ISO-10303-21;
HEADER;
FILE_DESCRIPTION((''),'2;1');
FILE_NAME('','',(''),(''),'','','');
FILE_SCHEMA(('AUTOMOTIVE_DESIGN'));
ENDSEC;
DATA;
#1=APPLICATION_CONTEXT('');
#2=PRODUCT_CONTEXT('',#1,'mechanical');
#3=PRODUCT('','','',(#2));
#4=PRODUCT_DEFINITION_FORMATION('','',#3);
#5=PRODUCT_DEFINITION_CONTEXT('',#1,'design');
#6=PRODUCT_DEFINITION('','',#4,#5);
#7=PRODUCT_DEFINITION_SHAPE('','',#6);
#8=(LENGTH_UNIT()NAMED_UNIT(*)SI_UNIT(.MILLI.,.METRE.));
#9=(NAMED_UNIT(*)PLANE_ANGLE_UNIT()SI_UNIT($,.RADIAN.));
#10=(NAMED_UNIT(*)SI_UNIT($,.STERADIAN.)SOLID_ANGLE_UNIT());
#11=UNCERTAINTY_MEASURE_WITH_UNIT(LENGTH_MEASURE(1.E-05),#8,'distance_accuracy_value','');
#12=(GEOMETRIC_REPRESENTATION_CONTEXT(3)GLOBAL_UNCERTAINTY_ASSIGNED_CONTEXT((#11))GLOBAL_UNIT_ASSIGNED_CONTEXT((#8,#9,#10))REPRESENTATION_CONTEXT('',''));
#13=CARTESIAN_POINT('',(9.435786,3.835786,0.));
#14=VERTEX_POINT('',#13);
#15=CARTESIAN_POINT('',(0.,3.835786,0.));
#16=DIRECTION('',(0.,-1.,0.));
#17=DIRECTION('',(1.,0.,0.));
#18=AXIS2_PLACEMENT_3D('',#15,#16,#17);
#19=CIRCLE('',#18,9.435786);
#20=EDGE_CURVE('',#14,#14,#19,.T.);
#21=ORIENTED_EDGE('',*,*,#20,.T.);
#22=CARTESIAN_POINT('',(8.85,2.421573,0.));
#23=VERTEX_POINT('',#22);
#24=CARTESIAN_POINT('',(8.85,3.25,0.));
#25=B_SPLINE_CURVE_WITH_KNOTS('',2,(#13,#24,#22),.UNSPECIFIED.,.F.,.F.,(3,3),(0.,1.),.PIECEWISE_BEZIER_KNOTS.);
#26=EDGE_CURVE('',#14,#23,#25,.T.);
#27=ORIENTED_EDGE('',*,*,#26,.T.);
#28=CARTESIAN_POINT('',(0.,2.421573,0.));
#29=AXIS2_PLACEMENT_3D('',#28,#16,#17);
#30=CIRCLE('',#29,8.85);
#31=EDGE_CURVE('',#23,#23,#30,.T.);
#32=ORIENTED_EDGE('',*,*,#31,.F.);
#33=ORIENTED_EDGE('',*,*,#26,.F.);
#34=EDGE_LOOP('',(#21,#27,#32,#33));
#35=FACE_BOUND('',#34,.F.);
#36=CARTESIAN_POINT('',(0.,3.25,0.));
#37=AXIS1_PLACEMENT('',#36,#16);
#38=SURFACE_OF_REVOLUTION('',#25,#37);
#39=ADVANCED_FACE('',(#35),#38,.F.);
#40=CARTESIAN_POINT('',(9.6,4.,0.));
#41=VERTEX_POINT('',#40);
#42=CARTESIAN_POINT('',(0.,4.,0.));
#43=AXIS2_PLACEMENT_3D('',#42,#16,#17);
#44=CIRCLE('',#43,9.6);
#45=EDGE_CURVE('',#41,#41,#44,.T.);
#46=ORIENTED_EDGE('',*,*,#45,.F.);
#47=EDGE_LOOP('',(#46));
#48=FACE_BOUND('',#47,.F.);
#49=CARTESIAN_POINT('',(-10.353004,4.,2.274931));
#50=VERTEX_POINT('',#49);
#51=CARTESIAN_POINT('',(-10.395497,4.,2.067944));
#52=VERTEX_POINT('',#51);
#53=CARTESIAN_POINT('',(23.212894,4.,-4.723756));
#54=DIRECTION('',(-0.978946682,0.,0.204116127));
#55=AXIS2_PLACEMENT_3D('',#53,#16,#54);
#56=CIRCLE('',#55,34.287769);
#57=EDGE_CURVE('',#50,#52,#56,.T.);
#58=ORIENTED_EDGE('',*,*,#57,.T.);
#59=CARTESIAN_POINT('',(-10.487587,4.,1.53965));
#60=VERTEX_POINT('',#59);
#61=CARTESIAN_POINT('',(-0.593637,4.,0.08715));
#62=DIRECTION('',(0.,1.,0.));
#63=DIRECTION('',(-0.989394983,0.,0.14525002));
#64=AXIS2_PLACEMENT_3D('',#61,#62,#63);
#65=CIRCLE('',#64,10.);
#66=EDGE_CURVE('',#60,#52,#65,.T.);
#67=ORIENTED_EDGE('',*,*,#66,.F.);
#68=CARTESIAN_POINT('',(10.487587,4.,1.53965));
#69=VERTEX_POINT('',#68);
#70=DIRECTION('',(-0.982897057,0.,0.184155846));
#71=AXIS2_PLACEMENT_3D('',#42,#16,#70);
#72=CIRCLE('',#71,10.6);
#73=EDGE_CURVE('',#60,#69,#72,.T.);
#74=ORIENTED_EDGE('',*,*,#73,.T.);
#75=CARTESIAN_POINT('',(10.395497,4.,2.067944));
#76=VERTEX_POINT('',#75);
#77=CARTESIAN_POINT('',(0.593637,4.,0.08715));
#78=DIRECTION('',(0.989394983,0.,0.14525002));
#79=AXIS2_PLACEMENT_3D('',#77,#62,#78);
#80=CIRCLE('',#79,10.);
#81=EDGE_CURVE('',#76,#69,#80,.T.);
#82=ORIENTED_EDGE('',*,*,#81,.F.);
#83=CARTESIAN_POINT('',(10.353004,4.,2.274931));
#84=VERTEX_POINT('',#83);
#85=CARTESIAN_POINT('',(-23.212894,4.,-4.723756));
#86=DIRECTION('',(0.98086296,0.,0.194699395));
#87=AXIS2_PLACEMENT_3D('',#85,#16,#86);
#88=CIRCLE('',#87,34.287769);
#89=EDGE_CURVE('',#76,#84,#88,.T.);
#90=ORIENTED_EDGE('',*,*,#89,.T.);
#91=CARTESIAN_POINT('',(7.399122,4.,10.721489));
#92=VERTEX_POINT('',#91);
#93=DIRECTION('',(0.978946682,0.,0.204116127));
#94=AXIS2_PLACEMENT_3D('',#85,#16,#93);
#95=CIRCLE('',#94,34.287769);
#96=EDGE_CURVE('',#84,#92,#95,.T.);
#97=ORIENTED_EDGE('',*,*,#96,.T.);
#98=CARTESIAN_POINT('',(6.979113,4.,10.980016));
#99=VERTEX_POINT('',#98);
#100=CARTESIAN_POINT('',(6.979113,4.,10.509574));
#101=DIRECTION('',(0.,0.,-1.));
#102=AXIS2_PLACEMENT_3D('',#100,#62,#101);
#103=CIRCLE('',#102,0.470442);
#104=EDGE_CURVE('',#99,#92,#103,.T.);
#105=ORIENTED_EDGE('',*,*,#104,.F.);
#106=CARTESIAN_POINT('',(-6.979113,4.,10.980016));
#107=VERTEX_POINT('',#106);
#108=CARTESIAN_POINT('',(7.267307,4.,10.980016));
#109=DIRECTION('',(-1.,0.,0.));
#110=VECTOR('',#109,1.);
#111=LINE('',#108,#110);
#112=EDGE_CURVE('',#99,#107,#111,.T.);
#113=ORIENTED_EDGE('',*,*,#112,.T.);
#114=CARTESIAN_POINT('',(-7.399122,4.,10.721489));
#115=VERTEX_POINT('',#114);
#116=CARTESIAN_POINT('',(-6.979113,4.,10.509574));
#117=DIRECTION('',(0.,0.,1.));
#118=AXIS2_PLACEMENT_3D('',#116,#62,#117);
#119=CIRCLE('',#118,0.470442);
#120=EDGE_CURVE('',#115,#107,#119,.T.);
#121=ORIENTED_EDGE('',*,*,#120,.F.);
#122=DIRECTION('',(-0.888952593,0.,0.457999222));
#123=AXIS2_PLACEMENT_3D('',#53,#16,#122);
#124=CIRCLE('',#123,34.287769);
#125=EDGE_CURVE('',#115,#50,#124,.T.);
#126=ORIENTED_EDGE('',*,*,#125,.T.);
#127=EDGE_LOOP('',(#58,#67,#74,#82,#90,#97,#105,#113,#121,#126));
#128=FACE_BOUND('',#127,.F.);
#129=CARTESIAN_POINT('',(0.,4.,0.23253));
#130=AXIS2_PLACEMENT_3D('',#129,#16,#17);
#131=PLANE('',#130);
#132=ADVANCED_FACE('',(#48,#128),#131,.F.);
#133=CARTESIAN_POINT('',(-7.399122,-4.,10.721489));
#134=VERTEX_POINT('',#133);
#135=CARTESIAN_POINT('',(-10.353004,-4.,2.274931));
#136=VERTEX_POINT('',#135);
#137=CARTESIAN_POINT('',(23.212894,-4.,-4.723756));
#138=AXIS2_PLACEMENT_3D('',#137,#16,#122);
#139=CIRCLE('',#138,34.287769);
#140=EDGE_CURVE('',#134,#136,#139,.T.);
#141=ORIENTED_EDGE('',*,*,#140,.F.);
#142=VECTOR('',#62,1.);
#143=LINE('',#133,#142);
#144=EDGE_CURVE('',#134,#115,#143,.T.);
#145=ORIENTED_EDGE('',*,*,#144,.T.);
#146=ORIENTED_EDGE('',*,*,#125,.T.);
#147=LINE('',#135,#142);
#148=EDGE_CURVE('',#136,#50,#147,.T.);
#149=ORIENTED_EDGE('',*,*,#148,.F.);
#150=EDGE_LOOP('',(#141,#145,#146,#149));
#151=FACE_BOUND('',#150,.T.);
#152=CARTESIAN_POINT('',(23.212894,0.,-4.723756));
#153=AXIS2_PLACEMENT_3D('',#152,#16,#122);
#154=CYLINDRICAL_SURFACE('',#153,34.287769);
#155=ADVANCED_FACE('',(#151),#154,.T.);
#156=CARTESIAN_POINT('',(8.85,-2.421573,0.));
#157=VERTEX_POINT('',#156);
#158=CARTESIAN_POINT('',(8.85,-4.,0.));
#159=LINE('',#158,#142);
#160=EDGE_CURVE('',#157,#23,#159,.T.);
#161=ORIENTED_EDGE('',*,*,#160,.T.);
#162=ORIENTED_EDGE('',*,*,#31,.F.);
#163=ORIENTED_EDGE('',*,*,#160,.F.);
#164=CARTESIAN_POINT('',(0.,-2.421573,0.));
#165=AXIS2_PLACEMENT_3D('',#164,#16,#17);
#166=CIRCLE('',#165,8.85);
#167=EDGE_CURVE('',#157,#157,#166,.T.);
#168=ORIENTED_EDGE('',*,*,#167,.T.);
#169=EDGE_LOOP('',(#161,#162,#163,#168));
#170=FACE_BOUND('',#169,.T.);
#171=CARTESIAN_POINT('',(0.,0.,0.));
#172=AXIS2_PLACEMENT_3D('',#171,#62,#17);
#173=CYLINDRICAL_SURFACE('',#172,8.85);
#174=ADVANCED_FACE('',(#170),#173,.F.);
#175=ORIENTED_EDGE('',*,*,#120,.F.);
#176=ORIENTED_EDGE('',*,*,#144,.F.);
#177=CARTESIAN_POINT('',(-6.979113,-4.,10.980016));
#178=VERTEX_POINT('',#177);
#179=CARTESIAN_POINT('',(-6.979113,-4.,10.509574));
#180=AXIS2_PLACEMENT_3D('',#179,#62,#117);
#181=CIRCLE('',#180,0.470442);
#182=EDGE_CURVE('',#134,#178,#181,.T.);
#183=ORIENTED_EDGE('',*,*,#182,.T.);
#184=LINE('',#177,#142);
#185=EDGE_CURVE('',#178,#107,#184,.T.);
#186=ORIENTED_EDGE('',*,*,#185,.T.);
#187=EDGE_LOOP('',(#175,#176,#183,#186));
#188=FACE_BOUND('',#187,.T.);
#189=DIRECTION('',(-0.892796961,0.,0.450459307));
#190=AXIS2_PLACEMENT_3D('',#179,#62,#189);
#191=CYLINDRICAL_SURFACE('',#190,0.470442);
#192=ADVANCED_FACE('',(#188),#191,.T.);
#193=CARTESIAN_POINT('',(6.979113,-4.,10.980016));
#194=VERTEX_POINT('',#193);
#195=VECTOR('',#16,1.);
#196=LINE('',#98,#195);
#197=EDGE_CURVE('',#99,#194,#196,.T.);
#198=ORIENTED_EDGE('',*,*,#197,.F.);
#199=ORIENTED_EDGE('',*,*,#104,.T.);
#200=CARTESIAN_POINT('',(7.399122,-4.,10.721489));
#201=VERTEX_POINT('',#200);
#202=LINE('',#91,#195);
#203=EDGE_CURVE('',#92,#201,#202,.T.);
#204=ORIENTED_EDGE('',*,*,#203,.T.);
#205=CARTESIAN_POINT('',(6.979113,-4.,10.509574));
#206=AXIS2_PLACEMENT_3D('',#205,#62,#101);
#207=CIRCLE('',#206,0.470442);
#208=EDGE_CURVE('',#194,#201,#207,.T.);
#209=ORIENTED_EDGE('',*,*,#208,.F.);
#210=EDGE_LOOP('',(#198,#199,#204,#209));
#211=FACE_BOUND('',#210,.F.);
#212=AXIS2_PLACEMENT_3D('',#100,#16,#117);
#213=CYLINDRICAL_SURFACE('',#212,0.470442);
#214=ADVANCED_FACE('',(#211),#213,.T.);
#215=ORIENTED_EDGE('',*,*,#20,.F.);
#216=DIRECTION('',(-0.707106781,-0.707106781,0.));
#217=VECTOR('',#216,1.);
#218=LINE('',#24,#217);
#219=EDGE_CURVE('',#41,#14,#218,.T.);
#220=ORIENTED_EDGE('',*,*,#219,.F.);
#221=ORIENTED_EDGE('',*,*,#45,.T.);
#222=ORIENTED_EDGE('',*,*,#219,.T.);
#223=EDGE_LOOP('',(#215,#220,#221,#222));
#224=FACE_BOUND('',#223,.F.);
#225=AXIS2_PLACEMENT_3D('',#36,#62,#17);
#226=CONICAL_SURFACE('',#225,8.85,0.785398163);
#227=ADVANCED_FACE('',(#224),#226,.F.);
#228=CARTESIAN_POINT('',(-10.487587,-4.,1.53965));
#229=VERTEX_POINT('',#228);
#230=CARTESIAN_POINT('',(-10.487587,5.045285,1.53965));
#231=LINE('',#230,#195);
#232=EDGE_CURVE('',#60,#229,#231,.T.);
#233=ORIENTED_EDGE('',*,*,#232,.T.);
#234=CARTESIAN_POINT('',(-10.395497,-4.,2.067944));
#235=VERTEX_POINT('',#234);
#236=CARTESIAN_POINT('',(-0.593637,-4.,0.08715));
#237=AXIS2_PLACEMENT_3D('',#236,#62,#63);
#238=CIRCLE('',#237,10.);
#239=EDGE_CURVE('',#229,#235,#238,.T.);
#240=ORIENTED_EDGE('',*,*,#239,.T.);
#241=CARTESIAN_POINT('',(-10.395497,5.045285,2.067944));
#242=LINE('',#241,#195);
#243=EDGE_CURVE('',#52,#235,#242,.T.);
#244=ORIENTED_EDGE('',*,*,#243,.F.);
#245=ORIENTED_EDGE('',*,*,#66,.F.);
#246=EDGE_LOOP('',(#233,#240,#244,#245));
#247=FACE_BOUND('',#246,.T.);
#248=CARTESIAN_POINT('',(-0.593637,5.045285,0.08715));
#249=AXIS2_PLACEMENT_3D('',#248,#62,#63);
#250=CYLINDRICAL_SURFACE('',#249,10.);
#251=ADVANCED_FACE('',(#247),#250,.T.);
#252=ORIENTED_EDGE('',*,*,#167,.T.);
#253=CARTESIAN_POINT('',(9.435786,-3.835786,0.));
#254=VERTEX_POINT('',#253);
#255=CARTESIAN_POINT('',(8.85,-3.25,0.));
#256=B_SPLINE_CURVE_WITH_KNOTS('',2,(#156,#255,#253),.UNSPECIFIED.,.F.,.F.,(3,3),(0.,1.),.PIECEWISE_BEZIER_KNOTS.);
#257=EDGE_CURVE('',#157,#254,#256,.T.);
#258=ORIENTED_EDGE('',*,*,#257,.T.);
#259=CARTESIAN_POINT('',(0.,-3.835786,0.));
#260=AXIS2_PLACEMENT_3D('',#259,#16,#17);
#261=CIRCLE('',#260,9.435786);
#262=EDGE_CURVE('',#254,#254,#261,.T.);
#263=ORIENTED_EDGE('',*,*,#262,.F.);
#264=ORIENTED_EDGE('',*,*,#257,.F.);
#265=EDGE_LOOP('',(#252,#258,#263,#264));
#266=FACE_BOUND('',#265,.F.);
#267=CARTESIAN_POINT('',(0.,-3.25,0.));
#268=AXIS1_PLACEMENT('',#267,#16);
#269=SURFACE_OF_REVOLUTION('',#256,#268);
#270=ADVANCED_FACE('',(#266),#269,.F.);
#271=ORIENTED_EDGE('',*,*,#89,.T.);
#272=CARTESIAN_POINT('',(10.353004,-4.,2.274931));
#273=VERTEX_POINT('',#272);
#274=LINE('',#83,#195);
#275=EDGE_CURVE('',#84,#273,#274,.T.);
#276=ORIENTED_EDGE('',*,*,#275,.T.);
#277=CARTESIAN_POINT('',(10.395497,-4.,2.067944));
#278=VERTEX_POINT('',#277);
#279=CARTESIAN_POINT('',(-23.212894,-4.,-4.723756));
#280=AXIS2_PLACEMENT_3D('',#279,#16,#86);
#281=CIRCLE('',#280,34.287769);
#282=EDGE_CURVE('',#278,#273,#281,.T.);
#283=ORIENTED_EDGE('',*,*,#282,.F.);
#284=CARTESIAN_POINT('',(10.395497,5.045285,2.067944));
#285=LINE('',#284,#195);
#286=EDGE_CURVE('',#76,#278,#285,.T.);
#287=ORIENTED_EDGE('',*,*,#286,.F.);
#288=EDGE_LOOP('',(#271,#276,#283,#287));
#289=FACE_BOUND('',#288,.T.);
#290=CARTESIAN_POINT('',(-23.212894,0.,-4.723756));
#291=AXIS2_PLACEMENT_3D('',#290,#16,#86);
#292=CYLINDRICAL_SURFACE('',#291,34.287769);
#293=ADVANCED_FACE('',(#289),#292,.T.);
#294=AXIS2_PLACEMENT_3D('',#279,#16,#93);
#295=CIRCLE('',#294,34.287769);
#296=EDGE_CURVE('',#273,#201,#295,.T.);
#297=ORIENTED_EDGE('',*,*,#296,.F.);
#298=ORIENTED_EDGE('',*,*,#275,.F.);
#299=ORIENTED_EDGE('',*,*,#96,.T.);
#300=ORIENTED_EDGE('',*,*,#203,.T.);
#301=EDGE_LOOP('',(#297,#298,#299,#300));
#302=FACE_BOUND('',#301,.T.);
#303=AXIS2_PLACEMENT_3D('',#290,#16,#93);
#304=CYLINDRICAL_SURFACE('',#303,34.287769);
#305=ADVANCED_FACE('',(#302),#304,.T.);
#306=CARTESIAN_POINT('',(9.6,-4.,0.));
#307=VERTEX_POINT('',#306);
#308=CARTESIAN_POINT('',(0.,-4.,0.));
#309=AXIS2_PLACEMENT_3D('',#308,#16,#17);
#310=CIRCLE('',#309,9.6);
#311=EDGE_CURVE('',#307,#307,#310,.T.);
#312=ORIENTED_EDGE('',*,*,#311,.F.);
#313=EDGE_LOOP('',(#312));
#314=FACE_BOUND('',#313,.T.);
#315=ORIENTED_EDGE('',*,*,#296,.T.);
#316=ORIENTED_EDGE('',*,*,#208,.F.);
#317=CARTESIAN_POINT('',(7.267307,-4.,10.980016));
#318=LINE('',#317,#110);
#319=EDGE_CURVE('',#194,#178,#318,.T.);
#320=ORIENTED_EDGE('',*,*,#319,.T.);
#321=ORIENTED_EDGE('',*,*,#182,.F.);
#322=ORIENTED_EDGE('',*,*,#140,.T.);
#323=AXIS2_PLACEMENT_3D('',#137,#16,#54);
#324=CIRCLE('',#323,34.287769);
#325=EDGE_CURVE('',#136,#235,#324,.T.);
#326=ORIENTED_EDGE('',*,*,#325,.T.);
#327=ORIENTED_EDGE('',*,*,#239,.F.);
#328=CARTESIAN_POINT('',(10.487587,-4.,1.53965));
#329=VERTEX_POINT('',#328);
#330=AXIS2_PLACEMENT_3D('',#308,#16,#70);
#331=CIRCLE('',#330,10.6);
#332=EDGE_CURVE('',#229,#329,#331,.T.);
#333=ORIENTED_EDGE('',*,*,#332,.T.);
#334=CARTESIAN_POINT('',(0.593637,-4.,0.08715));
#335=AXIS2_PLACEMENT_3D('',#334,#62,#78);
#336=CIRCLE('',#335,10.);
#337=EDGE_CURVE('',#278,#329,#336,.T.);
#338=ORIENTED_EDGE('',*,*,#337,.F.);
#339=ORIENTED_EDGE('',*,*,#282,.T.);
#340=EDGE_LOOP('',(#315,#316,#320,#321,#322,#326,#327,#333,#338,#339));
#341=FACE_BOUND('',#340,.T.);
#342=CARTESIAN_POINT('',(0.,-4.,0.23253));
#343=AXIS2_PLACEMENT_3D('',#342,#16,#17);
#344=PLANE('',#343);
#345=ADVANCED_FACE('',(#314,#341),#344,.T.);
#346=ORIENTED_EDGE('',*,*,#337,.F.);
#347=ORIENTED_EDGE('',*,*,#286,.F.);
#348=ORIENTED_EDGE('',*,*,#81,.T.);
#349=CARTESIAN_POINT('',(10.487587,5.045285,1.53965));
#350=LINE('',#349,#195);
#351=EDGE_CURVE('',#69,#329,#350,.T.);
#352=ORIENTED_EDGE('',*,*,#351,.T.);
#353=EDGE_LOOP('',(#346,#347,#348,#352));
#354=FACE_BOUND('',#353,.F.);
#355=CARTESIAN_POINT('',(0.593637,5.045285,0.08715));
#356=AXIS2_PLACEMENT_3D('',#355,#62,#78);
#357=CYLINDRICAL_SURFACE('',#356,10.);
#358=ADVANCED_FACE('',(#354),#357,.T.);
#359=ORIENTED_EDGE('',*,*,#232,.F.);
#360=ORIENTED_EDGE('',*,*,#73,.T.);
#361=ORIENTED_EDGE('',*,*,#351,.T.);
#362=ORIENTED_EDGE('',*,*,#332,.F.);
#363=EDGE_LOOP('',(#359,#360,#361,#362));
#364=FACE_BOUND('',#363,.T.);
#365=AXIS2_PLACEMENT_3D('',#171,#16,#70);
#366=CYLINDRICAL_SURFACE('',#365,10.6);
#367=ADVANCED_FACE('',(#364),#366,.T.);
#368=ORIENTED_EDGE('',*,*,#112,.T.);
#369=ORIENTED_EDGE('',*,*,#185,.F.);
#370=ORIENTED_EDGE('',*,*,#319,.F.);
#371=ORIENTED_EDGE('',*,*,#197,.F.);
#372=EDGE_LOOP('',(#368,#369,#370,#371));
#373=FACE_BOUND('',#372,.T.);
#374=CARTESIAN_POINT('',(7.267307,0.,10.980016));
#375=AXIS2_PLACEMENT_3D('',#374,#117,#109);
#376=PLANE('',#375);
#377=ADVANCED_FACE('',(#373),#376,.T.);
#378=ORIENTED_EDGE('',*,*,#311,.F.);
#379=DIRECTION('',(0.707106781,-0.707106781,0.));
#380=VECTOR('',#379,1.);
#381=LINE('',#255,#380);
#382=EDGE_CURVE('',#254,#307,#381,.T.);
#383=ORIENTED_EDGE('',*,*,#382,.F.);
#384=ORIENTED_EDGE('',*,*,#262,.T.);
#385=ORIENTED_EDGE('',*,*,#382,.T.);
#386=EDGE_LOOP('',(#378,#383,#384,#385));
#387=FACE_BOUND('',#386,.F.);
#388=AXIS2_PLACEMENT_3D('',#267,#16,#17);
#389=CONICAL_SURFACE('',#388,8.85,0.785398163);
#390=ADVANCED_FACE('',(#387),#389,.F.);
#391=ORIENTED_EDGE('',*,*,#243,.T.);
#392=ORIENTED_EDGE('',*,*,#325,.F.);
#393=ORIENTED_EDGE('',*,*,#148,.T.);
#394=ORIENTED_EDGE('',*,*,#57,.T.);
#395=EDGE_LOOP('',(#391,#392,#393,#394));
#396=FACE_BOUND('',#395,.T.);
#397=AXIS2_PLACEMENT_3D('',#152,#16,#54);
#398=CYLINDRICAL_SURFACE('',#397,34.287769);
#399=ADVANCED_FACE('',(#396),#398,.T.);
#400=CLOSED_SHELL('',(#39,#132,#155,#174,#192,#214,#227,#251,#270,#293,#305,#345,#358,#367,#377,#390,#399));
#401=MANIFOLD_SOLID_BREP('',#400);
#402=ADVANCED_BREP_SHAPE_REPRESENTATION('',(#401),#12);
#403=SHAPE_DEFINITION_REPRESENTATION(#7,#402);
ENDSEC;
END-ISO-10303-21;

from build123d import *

# Parameters (mm, degrees)
F0_R          = 8.85
F1_DEPTH      = 4
F1_DEPTH_BACK = 4
F2_T1_DEPTH   = 10.0905704575
F3_SIZE       = 0.75
F4_R          = 0.4704417071


# Not quite as in the source:
# - a fillet or chamfer that OpenCascade refuses, or shapes differently, is made with other operations: its cross-section is extruded or revolved along the edge and cut away or added


with BuildPart() as f1:
    # F0 (on Front) → F1 (new body, two sides)
    with BuildSketch(Plane.XZ) as f1_sk:
        with BuildLine():
            ThreePointArc((-10.4187088027, 1.9520519678), (-0.9802261707, -10.55457989), (10.6, 0))
            ThreePointArc((10.6, 0), (10.55457989, 0.9802261707), (10.4187088027, 1.9520519678))
            ThreePointArc((10.4187088027, 1.9520519678), (10.3862442109, 2.1135702761), (10.3530039199, 2.2749307319))
            ThreePointArc((10.3530039199, 2.2749307319), (0, 10.6), (-10.3530039199, 2.2749307319))
            ThreePointArc((-10.3530039199, 2.2749307319), (-10.3862442109, 2.1135702761), (-10.4187088027, 1.9520519678))
        make_face()
        Circle(F0_R, mode=Mode.SUBTRACT)
        with BuildLine():
            ThreePointArc((-10.3530039199, 2.2749307319), (0, 10.6), (10.3530039199, 2.2749307319))
            ThreePointArc((10.3530039199, 2.2749307319), (9.1045987077, 6.7318445783), (7.2673073852, 10.9800156206))
            Line((7.2673073852, 10.9800156206), (0, 10.9800156206))
            Line((0, 10.9800156206), (-7.2673073852, 10.9800156206))
            ThreePointArc((-7.2673073852, 10.9800156206), (-9.1045987077, 6.7318445783), (-10.3530039199, 2.2749307319))
        make_face()
    extrude(amount=F1_DEPTH)
    extrude(f1_sk.sketch, amount=-F1_DEPTH_BACK)

    # F2: fillet of radius 10 on 2 edges, made by hand

    # F2_s2 → F2_t1 (cut)
    with BuildSketch(Plane.XZ.offset(-5.0452852288)):
        with BuildLine():
            ThreePointArc((-10.4875868169, 1.5396502065), (-10.4450837448, 1.8044143565), (-10.3954968357, 2.0679436806))
            ThreePointArc((-10.3954968357, 2.0679436806), (-10.4071527555, 2.010007826), (-10.4187088027, 1.9520519678))
            ThreePointArc((-10.4187088027, 1.9520519678), (-10.4551813918, 1.7461907295), (-10.4875868169, 1.5396502065))
        make_face()
        with BuildLine():
            ThreePointArc((10.4875868169, 1.5396502065), (10.4450837448, 1.8044143565), (10.3954968357, 2.0679436806))
            ThreePointArc((10.3954968357, 2.0679436806), (10.4071527555, 2.010007826), (10.4187088027, 1.9520519678))
            ThreePointArc((10.4187088027, 1.9520519678), (10.4551813918, 1.7461907295), (10.4875868169, 1.5396502065))
        make_face()
    extrude(amount=F2_T1_DEPTH, mode=Mode.SUBTRACT)

    # F3
    f3_edges = [f1.edges().sort_by_distance(p)[0] for p in [
        (-8.85, 4, 0),
        (-8.85, -4, 0),
    ]]
    chamfer(f3_edges, length=F3_SIZE)

    # F4
    f4_edges = [f1.edges().sort_by_distance(p)[0] for p in [
        (-7.267307, 0, 10.980016),
        (7.267307, 0, 10.980016),
    ]]
    fillet(f4_edges, radius=F4_R)

    # F5: fillet of radius 2 on 2 edges, made by hand

    # F5_s1 → F5_t2 (revolve, cut)
    with BuildSketch(Plane.XY):
        with BuildLine():
            add(Edge.make_bspline(
                [(8.85, -2.4215728753), (8.85, -3.25), (9.4357864376, -3.8357864376)],
                knots=[0, 0, 0, 1, 1, 1], degree=2, weights=[1, 1, 1]))
            Line((9.4357864376, -3.8357864376), (8.85, -3.25))
            Line((8.85, -3.25), (8.85, -2.4215728753))
        make_face()
    revolve(axis=Axis((0, -3.25, 0), (0, -1, 0)), mode=Mode.SUBTRACT)

    # F5_s3 → F5_t4 (revolve, cut)
    with BuildSketch(Plane.XY):
        with BuildLine():
            add(Edge.make_bspline(
                [(9.4357864376, 3.8357864376), (8.85, 3.25), (8.85, 2.4215728753)],
                knots=[0, 0, 0, 1, 1, 1], degree=2, weights=[1, 1, 1]))
            Line((8.85, 2.4215728753), (8.85, 3.25))
            Line((8.85, 3.25), (9.4357864376, 3.8357864376))
        make_face()
    revolve(axis=Axis((0, 3.25, 0), (0, -1, 0)), mode=Mode.SUBTRACT)


solid = f1.part
